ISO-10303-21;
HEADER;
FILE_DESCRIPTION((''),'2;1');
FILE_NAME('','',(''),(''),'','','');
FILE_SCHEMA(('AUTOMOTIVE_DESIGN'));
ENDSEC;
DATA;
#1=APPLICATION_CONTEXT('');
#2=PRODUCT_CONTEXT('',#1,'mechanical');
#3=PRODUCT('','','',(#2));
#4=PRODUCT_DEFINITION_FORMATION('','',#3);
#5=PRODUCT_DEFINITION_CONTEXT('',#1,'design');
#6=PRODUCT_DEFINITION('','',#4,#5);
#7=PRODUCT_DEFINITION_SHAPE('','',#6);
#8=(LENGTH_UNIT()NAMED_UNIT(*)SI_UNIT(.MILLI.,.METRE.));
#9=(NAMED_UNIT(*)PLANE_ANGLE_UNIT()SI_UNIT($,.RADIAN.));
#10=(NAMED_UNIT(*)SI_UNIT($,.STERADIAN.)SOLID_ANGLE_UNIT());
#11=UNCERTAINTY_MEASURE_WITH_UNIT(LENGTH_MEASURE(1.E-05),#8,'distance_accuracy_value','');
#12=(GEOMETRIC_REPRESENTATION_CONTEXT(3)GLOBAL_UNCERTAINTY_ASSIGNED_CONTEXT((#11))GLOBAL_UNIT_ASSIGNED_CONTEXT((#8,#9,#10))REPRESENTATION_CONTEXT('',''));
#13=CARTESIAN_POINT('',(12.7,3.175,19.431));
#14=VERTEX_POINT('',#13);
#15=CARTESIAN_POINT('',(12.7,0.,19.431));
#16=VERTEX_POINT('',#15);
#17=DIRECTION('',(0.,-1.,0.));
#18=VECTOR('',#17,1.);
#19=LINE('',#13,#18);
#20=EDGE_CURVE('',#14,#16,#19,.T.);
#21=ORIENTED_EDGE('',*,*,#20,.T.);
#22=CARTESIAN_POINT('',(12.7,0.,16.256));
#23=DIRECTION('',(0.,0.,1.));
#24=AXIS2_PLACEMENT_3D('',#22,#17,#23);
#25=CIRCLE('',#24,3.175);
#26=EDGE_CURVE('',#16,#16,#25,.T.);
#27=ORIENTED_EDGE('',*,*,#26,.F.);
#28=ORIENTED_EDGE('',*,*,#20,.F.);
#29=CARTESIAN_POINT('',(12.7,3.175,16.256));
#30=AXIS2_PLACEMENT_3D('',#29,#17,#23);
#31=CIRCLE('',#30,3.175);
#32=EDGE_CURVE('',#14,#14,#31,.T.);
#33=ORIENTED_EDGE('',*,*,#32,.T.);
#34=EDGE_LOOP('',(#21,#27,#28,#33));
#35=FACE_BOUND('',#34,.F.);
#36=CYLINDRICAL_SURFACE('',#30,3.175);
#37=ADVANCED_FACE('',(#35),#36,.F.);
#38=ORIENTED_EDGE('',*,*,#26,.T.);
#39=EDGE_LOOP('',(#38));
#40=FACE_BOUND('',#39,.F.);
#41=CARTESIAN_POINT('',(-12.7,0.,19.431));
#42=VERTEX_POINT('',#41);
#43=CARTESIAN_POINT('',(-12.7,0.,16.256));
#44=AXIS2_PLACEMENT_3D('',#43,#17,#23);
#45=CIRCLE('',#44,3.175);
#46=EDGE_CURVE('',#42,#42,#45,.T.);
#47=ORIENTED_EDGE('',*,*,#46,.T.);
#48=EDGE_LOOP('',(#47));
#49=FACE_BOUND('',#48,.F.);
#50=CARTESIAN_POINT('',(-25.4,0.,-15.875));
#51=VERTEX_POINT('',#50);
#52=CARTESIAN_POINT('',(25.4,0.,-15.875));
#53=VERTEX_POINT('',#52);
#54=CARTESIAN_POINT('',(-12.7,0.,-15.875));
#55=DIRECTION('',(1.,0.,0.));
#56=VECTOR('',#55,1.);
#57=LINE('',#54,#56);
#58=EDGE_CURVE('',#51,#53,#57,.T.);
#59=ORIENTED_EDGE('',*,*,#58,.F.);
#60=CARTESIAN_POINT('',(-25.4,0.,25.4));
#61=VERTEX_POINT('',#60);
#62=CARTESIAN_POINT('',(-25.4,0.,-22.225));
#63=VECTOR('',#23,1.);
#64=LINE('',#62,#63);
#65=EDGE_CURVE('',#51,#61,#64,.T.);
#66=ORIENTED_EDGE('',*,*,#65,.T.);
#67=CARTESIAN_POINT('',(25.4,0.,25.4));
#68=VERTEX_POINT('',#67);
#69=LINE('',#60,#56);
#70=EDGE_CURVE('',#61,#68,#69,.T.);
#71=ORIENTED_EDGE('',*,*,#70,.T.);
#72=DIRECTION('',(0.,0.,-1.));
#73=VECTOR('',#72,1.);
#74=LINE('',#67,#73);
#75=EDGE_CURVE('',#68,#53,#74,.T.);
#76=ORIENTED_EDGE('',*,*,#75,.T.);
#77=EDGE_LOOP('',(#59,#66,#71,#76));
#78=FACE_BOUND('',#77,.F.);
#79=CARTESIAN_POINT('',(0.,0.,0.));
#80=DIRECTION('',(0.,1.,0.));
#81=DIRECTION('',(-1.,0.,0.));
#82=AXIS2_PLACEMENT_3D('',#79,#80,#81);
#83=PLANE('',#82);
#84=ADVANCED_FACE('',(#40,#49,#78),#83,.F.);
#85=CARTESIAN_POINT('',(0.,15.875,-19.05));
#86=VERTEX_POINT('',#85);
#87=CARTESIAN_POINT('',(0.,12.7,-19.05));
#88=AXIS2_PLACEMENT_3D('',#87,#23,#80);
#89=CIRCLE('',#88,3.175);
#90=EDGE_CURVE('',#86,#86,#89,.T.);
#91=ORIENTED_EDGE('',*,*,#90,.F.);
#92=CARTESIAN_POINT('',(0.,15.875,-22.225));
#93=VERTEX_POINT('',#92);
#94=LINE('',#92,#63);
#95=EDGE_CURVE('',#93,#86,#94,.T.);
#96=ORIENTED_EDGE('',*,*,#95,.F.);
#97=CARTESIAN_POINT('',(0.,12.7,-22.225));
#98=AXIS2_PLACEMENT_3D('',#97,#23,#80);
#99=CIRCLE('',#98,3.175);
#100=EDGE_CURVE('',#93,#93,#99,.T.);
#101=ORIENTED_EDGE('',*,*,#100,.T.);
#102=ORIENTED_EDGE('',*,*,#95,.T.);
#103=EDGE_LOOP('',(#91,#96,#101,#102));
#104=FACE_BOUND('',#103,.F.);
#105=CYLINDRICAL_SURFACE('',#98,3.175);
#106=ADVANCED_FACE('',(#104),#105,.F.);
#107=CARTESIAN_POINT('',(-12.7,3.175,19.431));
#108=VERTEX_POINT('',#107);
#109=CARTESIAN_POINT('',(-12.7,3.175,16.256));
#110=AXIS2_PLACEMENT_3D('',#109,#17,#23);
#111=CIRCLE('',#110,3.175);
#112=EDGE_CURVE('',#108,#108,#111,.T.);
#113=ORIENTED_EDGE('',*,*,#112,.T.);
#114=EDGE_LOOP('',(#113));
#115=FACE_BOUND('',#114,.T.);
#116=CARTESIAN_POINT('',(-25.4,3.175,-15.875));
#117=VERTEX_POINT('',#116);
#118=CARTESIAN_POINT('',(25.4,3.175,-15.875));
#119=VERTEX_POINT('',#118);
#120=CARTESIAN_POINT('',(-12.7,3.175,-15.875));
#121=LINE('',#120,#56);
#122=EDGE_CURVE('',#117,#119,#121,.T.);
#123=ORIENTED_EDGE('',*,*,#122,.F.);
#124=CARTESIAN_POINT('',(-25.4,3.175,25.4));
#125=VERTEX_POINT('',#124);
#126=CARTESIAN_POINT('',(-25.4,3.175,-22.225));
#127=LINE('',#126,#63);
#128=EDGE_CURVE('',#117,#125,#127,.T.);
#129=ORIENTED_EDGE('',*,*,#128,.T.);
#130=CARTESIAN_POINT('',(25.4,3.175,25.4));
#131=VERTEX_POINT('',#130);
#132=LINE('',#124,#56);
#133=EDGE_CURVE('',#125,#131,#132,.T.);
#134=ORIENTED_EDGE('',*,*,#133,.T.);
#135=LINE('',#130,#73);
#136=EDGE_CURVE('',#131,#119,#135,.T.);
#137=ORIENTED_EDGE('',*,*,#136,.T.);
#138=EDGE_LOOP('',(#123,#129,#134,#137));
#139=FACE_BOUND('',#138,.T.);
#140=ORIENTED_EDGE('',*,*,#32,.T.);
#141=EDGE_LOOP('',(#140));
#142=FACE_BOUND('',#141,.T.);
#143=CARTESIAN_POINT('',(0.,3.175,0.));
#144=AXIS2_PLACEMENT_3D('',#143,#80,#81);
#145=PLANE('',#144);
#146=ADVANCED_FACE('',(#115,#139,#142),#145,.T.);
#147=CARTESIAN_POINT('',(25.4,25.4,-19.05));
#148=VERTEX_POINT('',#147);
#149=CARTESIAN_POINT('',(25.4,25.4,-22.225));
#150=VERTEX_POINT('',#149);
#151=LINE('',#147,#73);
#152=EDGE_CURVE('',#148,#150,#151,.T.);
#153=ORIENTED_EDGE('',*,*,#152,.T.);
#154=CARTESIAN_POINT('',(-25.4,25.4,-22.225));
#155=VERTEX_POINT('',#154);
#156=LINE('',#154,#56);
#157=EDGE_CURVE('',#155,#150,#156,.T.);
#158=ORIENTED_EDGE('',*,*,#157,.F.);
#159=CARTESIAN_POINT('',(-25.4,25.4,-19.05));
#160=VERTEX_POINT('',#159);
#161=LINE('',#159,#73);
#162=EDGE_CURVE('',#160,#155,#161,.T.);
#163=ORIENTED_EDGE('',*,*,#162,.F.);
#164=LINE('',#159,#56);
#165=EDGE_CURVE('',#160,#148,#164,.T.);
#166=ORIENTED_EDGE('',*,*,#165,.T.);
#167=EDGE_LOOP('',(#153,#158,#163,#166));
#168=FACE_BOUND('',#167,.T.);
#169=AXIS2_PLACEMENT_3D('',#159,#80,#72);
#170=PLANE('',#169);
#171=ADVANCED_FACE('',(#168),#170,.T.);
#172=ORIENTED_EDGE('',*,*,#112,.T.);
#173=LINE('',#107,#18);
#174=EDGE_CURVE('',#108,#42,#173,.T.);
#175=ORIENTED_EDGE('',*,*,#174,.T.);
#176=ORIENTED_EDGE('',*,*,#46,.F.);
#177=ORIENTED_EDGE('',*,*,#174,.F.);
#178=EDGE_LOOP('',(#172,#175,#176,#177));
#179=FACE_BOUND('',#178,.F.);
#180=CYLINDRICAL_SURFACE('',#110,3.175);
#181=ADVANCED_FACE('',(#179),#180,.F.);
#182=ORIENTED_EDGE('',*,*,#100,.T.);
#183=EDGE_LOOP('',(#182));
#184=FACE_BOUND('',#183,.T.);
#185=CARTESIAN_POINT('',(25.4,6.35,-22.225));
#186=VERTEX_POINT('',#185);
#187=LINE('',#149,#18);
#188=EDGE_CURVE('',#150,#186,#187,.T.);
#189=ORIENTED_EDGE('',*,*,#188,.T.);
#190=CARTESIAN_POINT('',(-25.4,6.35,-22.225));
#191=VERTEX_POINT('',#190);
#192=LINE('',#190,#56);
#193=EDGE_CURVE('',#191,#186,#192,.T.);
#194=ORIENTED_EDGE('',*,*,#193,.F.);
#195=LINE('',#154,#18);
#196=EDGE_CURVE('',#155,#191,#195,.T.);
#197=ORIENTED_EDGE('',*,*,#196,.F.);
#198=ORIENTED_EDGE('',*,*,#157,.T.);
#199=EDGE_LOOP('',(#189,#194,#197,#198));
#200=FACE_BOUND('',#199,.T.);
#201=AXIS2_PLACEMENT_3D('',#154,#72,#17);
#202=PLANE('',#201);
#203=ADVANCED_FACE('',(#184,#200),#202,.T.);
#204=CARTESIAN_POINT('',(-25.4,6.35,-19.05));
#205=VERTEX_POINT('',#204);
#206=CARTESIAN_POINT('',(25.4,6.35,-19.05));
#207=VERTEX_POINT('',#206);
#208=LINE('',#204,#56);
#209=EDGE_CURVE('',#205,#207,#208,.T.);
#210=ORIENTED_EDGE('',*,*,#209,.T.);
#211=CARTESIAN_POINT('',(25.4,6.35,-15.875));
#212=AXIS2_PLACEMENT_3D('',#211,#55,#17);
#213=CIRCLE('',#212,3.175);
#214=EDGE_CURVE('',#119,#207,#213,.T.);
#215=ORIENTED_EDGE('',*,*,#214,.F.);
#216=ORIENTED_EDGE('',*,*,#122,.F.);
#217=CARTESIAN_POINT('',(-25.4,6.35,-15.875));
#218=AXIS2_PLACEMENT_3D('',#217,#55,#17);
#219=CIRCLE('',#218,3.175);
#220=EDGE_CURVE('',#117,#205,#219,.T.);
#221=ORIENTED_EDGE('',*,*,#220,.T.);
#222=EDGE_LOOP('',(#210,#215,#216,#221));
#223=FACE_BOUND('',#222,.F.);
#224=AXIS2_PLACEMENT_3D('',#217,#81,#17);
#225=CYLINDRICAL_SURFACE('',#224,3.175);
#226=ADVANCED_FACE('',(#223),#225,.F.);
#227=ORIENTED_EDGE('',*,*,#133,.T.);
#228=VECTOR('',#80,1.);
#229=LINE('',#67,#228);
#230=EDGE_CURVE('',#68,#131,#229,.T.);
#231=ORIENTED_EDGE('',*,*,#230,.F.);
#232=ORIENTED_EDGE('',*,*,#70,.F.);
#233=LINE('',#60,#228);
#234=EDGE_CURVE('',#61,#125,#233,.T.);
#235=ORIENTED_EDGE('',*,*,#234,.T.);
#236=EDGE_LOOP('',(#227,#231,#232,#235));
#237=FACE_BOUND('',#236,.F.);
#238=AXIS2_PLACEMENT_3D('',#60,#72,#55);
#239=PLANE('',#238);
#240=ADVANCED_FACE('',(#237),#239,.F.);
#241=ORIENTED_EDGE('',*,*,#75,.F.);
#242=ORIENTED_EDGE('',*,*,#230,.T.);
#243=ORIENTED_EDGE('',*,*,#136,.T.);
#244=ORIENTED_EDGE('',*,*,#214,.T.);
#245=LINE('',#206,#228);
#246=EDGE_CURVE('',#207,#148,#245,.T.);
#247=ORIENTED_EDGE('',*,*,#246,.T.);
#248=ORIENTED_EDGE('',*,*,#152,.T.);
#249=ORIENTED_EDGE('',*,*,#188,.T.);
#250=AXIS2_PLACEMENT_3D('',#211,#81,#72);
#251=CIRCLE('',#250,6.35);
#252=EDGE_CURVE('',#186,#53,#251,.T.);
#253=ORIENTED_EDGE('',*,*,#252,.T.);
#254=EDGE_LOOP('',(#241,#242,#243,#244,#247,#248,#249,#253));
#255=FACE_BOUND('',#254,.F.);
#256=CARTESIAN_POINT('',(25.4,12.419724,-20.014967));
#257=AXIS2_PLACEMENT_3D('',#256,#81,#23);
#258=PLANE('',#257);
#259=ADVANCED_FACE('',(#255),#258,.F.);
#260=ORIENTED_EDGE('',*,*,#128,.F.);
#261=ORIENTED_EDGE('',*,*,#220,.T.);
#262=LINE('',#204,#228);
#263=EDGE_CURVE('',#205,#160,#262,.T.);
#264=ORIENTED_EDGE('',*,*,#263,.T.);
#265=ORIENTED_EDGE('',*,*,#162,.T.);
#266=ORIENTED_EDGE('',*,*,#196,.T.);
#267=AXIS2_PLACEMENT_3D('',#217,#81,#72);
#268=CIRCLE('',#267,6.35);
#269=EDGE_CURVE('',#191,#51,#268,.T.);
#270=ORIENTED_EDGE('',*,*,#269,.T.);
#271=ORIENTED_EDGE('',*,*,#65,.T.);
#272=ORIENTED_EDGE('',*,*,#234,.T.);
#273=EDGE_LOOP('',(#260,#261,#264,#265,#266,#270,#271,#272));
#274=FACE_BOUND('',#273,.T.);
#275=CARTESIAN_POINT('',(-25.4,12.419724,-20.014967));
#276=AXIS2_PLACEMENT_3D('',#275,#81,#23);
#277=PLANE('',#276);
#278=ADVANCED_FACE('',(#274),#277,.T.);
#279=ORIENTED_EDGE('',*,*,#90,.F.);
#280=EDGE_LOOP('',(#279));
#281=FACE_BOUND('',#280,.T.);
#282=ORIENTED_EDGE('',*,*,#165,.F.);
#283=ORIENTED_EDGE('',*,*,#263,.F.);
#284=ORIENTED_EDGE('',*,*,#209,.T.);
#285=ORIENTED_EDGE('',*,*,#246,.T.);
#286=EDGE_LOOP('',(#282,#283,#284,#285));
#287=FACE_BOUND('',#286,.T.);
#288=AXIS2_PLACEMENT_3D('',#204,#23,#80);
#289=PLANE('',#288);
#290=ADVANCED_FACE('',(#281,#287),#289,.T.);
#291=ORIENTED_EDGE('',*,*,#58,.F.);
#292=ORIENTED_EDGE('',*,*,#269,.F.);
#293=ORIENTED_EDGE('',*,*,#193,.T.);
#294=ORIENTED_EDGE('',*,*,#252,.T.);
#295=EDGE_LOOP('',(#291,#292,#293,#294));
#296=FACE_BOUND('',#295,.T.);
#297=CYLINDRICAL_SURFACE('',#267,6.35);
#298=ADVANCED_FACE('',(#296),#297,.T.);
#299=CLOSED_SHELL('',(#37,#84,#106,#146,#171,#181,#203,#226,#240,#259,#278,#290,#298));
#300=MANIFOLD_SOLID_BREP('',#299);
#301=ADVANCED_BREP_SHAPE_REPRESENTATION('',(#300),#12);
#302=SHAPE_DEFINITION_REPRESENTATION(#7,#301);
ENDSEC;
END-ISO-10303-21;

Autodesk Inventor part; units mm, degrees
ref_plane "YZ Plane" through (0, 0, 0) normal (1, 0, 0) x (0, 1, 0)
ref_plane "XZ Plane" through (0, 0, 0) normal (0, 1, 0) x (-1, 0, 0)
ref_plane "XY Plane" through (0, 0, 0) normal (0, 0, 1) x (1, 0, 0)
sketch "Sketch1" plane through (0, 0, 0) normal (0, 1, 0) x (-1, 0, 0)
  line L0 (25.4, 25.4) -> (-25.4, 25.4)
  line L1 (-25.4, 25.4) -> (-25.4, -22.225)
  line L2 (-25.4, -22.225) -> (25.4, -22.225)
  line L3 (25.4, -22.225) -> (25.4, 25.4)
  point P0 (0, 0)
  dimension "d0" = 50.8
  dimension "d1" = 47.625
  dimension "d2" = 25.4
  dimension "d3" = 25.4
extrude "Extrusion1" add sketch "Sketch1" along normal blind 3.175
sketch "Sketch4" plane through (-25.4, 0, -19.05) normal (0, 0, -1) x (-1, 0, 0)
  line L0 (-50.8, 0) -> (0, 0)
  line L1 (0, 0) -> (0, 25.4)
  line L2 (0, 25.4) -> (-50.8, 25.4)
  line L3 (-50.8, 25.4) -> (-50.8, 0)
edge flange "Flange1" height 25.4 angle 90 thickness 3.175 bend radius 3.175 thickness toward (0, 0, -1) relief tear relief width 3.175 relief depth 1.5875 edges at (0, 3.175, -22.225) wall of the first edge with corners at (25.4, 0, -19.05) (-25.4, 0, -19.05) (-25.4, 25.4, -19.05) (25.4, 25.4, -19.05)
bend "Bend1"
corner "Corner1"
sketch "Sketch5" plane through (0, 3.175, 0) normal (0, 1, 0) x (1, 0, 0)
  line L0 (-25.4, -25.4) -> (25.4, -25.4) projected
  line L1 (-25.4, 15.875) -> (-25.4, -25.4) projected
  point P0 (0, 0)
  point P1 (-12.7, -16.256)
  point P2 (12.7, -16.256)
  dimension "d23" = 9.144
  dimension "d24" = 9.144
  dimension "d25" = 25.4
  dimension "d26" = 12.7
hole "Hole1" at (-12.7, 3.175, 16.256) at (12.7, 3.175, 16.256) direction (0, -1, 0) diameter 6.35 end through all
sketch "Sketch6" plane through (25.4, 25.4, -22.225) normal (0, 0, -1) x (-1, 0, 0)
  line L0 (0, 0) -> (50.8, 0) projected
  line L1 (50.8, 0) -> (50.8, -19.05) projected
  point P0 (25.4, -25.4)
  point P1 (25.4, -12.7)
  dimension "d34" = 12.7
  dimension "d35" = 25.4
hole "Hole2" at (0, 12.7, -22.225) direction (0, 0, 1) diameter 6.35 end through all
equation "\"d24\" = d23"
equation "\"d32\" = Thickness"
equation "\"d41\" = Thickness"
equation "\"d13\" = BendReliefWidth"
equation "\"d14\" = BendReliefDepth"
equation "\"d15\" = MinimumRemnant"
equation "\"d16\" = BendRadius"
equation "\"d19\" = BendRadius"
equation "\"d20\" = CornerReliefSize"
equation "\"d21\" = GapSize"
equation "\"d22\" = JacobiRadiusSize"
equation "\"BendRadius\" = Thickness"
equation "\"BendReliefWidth\" = Thickness"
equation "\"BendReliefDepth\" = 0.5 * Thickness"
equation "\"CornerReliefSize\" = 4 * Thickness"
equation "\"MinimumRemnant\" = 2 * Thickness"
equation "\"TransitionRadius\" = BendRadius"
equation "\"JacobiRadiusSize\" = BendRadius"
equation "\"GapSize\" = Thickness"
equation "\"Thickness\" = 3.175"
properties part number "Sheet for"
